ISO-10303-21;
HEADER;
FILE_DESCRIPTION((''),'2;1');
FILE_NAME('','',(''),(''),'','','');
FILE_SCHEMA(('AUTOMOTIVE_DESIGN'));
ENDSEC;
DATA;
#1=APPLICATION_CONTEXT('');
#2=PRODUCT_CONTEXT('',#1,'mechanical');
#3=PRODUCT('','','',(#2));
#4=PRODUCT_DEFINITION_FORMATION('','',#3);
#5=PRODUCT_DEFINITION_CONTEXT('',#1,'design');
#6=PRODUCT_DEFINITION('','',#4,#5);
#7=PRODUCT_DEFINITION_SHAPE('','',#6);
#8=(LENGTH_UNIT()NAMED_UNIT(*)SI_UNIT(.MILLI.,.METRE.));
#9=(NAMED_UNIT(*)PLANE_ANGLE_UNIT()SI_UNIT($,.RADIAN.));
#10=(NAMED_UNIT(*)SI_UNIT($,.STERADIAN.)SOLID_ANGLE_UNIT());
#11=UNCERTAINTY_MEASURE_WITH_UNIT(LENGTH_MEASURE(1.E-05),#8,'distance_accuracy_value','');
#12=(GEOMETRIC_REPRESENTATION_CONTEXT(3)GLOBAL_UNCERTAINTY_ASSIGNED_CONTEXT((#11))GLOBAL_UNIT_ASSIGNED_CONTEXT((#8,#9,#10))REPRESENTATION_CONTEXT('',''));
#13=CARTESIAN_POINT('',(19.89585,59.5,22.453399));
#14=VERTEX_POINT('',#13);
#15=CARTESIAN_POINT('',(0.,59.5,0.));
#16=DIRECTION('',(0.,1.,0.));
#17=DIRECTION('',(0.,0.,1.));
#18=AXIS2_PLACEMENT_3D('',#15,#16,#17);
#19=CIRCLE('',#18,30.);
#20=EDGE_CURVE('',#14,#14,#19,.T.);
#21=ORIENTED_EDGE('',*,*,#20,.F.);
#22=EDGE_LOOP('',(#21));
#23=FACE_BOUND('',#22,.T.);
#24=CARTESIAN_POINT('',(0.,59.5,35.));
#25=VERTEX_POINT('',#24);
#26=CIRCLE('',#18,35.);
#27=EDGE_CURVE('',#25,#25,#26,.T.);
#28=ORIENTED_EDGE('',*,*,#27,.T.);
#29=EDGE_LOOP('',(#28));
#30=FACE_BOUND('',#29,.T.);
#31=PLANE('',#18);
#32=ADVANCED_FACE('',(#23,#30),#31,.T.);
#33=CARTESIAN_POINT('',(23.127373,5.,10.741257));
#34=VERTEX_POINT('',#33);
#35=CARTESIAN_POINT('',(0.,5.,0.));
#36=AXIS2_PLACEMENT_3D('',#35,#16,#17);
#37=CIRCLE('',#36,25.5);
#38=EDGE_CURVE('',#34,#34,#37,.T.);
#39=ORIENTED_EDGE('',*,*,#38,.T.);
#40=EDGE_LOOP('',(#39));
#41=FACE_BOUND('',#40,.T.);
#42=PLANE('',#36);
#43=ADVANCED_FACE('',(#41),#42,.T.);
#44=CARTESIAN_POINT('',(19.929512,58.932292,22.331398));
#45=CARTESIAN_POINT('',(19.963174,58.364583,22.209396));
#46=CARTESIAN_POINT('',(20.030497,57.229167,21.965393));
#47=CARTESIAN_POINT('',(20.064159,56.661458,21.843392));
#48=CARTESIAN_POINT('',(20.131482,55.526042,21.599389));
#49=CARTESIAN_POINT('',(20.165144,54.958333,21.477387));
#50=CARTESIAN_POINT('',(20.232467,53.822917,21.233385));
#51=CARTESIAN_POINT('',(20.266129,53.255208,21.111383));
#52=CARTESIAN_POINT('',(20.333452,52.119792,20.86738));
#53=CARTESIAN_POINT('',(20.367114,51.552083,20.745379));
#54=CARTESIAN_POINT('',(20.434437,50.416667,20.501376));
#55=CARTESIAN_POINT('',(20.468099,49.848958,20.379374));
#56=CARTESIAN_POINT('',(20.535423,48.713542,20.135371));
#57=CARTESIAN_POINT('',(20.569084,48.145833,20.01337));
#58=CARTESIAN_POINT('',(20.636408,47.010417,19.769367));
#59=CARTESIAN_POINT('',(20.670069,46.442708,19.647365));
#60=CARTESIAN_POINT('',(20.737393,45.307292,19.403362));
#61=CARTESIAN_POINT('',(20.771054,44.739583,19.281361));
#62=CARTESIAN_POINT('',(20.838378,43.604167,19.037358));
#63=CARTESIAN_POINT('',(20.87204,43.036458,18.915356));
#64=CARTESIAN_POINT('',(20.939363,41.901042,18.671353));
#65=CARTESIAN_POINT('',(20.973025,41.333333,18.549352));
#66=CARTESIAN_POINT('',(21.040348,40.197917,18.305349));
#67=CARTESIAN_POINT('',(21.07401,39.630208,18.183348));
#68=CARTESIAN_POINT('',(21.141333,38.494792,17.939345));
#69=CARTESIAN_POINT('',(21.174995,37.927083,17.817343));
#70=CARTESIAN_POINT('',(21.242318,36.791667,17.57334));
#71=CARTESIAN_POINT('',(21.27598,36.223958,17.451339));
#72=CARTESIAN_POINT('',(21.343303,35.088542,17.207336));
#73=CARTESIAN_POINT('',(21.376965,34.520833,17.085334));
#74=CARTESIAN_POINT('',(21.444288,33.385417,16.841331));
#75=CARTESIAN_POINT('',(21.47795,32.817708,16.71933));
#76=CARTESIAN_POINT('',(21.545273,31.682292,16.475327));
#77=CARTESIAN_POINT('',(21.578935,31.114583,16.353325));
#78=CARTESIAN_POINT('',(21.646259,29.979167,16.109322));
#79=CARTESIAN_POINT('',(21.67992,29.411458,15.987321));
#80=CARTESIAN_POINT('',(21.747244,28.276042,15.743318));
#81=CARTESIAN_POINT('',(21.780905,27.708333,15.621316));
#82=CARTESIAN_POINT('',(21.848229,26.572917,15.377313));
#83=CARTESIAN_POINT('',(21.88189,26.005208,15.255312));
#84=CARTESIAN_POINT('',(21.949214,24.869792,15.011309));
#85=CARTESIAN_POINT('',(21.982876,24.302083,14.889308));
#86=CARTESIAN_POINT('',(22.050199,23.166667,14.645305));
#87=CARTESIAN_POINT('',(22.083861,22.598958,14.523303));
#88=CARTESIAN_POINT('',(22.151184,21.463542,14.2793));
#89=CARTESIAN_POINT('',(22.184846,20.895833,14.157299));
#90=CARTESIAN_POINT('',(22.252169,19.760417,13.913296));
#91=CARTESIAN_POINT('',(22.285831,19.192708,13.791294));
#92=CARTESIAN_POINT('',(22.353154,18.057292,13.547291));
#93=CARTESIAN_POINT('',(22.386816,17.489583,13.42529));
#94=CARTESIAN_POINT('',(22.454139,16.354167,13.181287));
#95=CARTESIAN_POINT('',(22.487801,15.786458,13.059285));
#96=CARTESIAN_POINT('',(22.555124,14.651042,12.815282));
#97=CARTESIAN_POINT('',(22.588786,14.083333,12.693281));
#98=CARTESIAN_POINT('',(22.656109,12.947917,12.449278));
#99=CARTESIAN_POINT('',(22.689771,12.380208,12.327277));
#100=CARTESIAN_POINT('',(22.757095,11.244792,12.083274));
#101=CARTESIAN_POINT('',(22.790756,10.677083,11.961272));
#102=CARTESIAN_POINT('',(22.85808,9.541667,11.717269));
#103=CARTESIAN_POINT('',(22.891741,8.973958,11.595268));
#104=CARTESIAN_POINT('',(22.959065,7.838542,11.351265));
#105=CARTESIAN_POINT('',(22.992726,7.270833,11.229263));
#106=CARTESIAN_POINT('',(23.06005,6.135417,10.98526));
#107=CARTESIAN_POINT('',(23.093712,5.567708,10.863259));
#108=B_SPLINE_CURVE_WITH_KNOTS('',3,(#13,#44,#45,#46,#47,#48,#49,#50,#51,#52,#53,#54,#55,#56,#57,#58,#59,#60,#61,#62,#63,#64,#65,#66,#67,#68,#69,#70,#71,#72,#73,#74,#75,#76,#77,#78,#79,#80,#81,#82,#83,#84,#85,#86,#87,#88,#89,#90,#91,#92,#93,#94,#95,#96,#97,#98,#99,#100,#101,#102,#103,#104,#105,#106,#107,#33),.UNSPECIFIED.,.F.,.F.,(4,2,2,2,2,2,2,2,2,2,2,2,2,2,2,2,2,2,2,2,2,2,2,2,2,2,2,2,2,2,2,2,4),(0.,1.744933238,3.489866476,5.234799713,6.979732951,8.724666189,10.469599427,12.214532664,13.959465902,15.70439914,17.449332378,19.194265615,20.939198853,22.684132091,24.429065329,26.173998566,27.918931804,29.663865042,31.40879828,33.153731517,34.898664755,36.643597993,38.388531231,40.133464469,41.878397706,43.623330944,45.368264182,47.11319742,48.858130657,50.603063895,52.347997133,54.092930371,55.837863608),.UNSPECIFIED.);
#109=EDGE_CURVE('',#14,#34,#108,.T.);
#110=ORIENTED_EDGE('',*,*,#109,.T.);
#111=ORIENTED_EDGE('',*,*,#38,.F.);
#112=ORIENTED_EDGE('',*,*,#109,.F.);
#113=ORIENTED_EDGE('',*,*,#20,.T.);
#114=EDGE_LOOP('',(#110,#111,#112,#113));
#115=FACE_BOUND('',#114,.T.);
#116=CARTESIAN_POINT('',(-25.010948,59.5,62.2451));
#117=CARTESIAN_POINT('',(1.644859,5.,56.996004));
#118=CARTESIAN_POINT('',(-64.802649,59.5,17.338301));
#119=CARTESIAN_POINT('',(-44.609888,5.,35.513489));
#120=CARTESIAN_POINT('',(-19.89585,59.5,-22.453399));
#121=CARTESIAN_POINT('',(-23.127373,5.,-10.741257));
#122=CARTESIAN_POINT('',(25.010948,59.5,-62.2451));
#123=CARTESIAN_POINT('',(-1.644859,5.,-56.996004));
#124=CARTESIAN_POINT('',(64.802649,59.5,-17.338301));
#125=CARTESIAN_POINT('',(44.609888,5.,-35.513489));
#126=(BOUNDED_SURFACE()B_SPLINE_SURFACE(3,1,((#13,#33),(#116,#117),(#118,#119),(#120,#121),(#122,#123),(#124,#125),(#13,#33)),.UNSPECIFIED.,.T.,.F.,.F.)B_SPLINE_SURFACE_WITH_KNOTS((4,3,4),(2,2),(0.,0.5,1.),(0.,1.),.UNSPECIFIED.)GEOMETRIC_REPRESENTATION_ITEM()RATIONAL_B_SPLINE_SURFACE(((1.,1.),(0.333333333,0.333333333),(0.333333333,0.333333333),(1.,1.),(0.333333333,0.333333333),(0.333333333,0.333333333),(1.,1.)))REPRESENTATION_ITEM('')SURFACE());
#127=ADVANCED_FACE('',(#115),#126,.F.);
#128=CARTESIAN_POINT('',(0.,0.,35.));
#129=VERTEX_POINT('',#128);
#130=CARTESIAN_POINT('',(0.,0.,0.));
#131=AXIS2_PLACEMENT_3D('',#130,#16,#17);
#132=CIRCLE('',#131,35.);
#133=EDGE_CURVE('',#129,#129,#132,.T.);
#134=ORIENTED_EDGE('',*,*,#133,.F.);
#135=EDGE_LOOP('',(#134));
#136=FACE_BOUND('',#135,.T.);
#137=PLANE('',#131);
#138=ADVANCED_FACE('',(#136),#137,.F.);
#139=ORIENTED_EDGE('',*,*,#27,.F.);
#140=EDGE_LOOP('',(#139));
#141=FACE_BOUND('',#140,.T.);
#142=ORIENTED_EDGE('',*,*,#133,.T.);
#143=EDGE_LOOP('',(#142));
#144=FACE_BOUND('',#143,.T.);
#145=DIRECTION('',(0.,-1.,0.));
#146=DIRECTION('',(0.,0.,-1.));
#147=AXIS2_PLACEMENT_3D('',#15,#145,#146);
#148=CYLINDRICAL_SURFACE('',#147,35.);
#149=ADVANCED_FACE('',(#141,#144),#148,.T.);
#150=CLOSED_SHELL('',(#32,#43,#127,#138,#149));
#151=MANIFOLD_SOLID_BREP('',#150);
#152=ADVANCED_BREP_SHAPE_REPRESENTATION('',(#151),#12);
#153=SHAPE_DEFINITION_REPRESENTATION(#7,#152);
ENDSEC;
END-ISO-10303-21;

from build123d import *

# Parameters (mm, degrees)
SKETCH_1_R      = 35
EXTRUDE_1_DEPTH = 59.5


with BuildPart() as part:
    # 스케치1 → 보스-돌출1 (new body)
    with BuildSketch(Plane(origin=(0, 0, 0), x_dir=(1, 0, 0), z_dir=(0, 1, 0))):
        with Locations(Location((0, 0, 0), (0, 0, 270))):
            Circle(SKETCH_1_R)
    extrude(amount=EXTRUDE_1_DEPTH)

    # 컷-로프트1: read off the stored shape, not the designer's step
    # 컷-로프트1: loft between two sections, ruled curve by curve
    loft_1_from = [
        Edge.make_bspline([(19.895850284, 59.5, 22.45339933), (-25.010948375, 59.5, 62.245099898), (-64.802648944, 59.5, 17.338301239), (-19.895850284, 59.5, -22.45339933), (25.010948375, 59.5, -62.245099898), (64.802648944, 59.5, -17.338301239), (19.895850284, 59.5, 22.45339933)], [0, 0, 0, 0, 0.5, 0.5, 0.5, 1, 1, 1, 1], 3, [1, 0.333333333, 0.333333333, 1, 0.333333333, 0.333333333, 1]),
    ]
    loft_1_to = [
        Edge.make_bspline([(23.127373228, 5, 10.741257262), (1.644858704, 5, 56.996003718), (-44.609887752, 5, 35.513489194), (-23.127373228, 5, -10.741257262), (-1.644858704, 5, -56.996003718), (44.609887752, 5, -35.513489194), (23.127373228, 5, 10.741257262)], [0, 0, 0, 0, 0.5, 0.5, 0.5, 1, 1, 1, 1], 3, [1, 0.333333333, 0.333333333, 1, 0.333333333, 0.333333333, 1]),
    ]
    loft_1 = Solid(Shell([*[Face.make_surface_from_curves(loft_1_from[k], loft_1_to[k]) for k in range(1)], Face(Wire(loft_1_from)), Face(Wire(loft_1_to))]))
    add(loft_1, mode=Mode.SUBTRACT)


solid = part.part
